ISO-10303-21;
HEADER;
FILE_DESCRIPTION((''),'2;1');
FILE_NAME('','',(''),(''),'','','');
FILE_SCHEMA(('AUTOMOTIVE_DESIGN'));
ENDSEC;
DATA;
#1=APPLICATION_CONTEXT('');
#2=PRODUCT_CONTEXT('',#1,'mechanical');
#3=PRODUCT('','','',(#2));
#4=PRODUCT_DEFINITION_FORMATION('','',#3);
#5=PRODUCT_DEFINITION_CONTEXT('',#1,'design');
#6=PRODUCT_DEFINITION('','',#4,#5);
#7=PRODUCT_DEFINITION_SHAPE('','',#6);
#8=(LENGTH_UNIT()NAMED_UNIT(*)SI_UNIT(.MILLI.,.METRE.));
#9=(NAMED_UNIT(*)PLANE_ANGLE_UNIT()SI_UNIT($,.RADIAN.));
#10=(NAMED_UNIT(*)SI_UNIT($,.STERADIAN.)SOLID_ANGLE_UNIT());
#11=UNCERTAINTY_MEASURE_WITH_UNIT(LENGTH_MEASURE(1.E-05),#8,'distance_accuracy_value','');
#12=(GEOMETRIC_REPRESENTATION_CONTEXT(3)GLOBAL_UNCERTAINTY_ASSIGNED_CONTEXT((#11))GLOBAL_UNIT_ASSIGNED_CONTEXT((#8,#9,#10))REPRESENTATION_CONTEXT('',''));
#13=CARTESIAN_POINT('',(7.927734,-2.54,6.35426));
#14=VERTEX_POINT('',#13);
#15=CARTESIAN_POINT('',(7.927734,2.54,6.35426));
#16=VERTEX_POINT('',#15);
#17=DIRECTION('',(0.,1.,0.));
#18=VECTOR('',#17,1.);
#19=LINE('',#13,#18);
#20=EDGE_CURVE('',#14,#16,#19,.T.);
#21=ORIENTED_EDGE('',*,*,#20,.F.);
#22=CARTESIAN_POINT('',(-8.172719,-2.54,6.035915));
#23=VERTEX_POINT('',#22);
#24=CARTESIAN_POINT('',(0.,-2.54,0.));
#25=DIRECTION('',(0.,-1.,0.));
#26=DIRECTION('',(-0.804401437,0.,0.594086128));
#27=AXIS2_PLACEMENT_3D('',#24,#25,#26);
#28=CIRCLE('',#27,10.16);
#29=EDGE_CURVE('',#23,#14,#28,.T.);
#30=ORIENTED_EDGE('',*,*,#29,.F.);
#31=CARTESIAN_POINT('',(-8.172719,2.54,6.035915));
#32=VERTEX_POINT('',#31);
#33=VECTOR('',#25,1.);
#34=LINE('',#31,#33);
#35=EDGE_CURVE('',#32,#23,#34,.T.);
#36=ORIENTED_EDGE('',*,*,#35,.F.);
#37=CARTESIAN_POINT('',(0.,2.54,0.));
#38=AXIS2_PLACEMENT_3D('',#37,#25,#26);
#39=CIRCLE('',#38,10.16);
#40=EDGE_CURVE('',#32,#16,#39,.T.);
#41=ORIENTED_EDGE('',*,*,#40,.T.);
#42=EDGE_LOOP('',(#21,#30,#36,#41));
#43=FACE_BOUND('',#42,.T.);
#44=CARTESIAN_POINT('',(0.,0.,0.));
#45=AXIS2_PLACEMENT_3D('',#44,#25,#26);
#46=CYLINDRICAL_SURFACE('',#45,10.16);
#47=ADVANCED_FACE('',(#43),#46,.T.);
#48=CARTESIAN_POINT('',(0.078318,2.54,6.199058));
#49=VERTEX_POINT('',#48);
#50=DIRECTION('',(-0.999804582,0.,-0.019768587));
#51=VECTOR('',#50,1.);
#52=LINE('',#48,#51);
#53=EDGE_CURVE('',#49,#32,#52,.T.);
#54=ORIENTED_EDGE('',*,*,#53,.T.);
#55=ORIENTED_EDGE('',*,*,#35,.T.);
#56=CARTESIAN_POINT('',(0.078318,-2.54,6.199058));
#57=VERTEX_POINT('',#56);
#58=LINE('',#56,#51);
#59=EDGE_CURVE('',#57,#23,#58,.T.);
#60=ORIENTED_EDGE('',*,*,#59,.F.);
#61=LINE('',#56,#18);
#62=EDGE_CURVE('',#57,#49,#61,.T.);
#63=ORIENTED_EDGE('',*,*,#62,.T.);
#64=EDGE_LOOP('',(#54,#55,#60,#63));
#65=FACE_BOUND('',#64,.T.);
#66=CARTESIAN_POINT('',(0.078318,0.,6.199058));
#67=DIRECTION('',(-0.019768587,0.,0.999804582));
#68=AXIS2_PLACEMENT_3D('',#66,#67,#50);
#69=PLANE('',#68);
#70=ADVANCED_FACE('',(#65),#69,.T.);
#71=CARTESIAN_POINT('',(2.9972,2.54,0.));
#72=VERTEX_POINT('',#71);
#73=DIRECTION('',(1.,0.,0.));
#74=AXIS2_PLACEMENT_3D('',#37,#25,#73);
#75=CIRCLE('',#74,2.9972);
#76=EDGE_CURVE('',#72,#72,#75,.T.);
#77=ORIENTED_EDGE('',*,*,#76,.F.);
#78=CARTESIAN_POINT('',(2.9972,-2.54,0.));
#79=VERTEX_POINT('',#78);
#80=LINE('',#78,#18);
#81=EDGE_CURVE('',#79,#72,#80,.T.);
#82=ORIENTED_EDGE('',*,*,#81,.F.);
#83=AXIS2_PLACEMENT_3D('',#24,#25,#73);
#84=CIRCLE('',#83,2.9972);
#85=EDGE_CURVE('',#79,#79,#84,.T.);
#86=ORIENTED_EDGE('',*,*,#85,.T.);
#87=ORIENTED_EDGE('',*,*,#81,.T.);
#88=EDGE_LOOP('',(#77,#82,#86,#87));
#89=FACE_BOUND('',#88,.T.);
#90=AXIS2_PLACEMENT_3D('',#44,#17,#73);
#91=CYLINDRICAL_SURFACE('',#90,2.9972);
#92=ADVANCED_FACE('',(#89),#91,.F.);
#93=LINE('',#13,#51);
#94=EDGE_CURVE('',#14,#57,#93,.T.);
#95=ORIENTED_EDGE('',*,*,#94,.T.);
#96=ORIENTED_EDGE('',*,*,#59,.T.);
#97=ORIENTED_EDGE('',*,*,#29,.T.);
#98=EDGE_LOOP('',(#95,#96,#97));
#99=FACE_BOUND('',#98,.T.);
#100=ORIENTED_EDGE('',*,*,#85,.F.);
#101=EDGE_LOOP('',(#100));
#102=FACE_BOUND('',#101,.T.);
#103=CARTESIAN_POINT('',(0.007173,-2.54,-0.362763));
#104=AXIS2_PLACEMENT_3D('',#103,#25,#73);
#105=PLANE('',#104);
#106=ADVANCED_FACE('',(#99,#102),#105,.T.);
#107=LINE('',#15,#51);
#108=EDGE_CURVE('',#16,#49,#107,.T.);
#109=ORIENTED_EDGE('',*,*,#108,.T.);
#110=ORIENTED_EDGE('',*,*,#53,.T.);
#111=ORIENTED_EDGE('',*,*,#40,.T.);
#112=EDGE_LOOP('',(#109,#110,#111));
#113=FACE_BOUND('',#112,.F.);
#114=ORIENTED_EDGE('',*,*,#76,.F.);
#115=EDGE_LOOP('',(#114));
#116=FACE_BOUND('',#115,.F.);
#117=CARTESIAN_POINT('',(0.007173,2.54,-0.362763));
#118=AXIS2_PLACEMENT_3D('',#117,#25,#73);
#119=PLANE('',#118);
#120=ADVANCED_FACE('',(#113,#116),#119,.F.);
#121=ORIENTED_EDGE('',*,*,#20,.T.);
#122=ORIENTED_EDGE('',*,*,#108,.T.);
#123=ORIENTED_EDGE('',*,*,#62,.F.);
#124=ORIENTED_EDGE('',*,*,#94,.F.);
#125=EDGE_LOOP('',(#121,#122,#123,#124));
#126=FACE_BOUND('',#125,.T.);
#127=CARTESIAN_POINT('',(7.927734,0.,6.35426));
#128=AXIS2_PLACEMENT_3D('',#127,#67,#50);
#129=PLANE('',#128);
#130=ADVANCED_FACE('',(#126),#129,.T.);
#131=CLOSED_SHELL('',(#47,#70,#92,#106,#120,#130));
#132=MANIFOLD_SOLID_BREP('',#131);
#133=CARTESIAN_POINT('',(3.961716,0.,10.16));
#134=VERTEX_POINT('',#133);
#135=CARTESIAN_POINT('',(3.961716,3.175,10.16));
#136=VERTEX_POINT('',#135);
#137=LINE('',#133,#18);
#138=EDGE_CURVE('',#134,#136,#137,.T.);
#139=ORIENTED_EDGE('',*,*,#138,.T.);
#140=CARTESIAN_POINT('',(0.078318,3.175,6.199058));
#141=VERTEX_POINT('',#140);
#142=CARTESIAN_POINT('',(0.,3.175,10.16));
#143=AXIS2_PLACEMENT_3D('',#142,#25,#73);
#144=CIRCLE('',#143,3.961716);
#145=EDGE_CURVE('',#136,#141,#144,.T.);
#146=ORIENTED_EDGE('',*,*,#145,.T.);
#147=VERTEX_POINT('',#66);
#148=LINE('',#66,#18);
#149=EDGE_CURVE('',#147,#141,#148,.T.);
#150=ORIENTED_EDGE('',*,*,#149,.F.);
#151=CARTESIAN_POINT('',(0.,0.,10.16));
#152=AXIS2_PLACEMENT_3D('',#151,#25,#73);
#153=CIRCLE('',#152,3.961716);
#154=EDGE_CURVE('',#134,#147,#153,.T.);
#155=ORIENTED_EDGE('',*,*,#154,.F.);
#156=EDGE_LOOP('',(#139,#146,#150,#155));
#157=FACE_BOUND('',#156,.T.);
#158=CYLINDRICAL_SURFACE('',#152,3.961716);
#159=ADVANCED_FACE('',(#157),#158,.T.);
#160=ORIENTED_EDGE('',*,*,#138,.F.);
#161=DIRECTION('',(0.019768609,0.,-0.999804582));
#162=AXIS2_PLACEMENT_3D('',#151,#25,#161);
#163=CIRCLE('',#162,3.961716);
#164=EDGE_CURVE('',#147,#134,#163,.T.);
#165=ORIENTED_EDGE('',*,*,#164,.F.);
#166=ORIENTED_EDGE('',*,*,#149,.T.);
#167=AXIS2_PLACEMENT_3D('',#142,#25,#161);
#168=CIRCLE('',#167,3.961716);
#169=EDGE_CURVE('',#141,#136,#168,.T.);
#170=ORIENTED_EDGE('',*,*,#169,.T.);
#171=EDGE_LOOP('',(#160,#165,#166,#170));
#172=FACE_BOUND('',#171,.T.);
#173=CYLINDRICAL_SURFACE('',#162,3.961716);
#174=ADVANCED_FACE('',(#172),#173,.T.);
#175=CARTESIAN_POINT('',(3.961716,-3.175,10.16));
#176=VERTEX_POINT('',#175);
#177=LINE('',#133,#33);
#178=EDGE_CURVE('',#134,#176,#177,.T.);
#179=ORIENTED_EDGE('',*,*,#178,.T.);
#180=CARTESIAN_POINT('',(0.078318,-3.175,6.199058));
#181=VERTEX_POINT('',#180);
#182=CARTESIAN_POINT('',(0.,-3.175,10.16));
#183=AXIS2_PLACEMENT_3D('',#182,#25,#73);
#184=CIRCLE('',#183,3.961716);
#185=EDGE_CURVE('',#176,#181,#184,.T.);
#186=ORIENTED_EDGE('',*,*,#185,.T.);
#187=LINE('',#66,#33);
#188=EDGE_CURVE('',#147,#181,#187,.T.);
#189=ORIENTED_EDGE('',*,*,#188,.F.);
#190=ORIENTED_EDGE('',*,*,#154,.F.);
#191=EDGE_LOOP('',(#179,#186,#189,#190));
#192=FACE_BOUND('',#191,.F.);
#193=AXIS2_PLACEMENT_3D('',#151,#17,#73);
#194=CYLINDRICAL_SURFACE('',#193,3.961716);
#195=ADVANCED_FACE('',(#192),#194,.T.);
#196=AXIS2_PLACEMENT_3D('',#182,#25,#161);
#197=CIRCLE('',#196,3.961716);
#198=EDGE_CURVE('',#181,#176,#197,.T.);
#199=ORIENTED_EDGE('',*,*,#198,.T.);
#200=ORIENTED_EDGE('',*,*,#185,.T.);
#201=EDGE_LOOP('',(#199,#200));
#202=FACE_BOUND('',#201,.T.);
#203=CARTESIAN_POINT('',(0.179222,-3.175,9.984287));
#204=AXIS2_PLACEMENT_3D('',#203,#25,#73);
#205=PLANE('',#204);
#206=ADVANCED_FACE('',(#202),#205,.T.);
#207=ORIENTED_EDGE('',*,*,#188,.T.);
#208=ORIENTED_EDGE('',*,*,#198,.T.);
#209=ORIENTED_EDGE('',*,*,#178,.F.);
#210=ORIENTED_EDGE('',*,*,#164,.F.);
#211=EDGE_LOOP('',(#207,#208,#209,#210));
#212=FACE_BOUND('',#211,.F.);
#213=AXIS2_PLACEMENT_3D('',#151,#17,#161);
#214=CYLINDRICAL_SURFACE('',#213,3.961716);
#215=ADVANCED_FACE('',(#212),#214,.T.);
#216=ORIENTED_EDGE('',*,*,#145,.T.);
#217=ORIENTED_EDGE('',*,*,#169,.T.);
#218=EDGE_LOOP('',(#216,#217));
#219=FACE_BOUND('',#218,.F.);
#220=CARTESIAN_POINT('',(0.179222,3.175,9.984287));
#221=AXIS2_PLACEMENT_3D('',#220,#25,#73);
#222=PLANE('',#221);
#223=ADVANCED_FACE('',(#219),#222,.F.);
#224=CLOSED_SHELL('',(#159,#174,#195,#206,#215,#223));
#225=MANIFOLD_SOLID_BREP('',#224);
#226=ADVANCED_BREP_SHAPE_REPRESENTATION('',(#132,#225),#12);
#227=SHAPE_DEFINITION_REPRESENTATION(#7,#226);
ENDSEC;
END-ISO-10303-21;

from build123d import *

# Parameters (mm, degrees)
F0_R     = 2.9972
F1_DEPTH = 2.54
F2_DEPTH = 3.175


# Not quite as in the source:
# - a feature names something its author has since deleted; it is built from what else it names


with BuildPart() as f1:
    # F0 (on Front) → F1 (new body, symmetric)
    with BuildSketch(Plane.XZ):
        with BuildLine():
            Line((0.078317611, 6.1990582674), (-8.172718603, 6.0359150621))
            ThreePointArc((-8.172718603, 6.0359150621), (0.2008488403, -10.1580145572), (7.9277344701, 6.354260474))
            Line((7.9277344701, 6.354260474), (0.078317611, 6.1990582674))
        make_face()
        Circle(F0_R, mode=Mode.SUBTRACT)
    extrude(amount=F1_DEPTH, both=True)


with BuildPart() as f2:
    # F0 (on Front) → F2 (new body, symmetric)
    with BuildSketch(Plane.XZ):
        with BuildLine():
            ThreePointArc((3.9617159233, 10.16), (-2.828910142, 12.9335285225), (0.078317611, 6.1990582674))
            ThreePointArc((0.078317611, 6.1990582674), (2.828910142, 7.3864714775), (3.9617159233, 10.16))
        make_face()
    extrude(amount=F2_DEPTH, both=True)


solid = Compound([f1.part, f2.part])
